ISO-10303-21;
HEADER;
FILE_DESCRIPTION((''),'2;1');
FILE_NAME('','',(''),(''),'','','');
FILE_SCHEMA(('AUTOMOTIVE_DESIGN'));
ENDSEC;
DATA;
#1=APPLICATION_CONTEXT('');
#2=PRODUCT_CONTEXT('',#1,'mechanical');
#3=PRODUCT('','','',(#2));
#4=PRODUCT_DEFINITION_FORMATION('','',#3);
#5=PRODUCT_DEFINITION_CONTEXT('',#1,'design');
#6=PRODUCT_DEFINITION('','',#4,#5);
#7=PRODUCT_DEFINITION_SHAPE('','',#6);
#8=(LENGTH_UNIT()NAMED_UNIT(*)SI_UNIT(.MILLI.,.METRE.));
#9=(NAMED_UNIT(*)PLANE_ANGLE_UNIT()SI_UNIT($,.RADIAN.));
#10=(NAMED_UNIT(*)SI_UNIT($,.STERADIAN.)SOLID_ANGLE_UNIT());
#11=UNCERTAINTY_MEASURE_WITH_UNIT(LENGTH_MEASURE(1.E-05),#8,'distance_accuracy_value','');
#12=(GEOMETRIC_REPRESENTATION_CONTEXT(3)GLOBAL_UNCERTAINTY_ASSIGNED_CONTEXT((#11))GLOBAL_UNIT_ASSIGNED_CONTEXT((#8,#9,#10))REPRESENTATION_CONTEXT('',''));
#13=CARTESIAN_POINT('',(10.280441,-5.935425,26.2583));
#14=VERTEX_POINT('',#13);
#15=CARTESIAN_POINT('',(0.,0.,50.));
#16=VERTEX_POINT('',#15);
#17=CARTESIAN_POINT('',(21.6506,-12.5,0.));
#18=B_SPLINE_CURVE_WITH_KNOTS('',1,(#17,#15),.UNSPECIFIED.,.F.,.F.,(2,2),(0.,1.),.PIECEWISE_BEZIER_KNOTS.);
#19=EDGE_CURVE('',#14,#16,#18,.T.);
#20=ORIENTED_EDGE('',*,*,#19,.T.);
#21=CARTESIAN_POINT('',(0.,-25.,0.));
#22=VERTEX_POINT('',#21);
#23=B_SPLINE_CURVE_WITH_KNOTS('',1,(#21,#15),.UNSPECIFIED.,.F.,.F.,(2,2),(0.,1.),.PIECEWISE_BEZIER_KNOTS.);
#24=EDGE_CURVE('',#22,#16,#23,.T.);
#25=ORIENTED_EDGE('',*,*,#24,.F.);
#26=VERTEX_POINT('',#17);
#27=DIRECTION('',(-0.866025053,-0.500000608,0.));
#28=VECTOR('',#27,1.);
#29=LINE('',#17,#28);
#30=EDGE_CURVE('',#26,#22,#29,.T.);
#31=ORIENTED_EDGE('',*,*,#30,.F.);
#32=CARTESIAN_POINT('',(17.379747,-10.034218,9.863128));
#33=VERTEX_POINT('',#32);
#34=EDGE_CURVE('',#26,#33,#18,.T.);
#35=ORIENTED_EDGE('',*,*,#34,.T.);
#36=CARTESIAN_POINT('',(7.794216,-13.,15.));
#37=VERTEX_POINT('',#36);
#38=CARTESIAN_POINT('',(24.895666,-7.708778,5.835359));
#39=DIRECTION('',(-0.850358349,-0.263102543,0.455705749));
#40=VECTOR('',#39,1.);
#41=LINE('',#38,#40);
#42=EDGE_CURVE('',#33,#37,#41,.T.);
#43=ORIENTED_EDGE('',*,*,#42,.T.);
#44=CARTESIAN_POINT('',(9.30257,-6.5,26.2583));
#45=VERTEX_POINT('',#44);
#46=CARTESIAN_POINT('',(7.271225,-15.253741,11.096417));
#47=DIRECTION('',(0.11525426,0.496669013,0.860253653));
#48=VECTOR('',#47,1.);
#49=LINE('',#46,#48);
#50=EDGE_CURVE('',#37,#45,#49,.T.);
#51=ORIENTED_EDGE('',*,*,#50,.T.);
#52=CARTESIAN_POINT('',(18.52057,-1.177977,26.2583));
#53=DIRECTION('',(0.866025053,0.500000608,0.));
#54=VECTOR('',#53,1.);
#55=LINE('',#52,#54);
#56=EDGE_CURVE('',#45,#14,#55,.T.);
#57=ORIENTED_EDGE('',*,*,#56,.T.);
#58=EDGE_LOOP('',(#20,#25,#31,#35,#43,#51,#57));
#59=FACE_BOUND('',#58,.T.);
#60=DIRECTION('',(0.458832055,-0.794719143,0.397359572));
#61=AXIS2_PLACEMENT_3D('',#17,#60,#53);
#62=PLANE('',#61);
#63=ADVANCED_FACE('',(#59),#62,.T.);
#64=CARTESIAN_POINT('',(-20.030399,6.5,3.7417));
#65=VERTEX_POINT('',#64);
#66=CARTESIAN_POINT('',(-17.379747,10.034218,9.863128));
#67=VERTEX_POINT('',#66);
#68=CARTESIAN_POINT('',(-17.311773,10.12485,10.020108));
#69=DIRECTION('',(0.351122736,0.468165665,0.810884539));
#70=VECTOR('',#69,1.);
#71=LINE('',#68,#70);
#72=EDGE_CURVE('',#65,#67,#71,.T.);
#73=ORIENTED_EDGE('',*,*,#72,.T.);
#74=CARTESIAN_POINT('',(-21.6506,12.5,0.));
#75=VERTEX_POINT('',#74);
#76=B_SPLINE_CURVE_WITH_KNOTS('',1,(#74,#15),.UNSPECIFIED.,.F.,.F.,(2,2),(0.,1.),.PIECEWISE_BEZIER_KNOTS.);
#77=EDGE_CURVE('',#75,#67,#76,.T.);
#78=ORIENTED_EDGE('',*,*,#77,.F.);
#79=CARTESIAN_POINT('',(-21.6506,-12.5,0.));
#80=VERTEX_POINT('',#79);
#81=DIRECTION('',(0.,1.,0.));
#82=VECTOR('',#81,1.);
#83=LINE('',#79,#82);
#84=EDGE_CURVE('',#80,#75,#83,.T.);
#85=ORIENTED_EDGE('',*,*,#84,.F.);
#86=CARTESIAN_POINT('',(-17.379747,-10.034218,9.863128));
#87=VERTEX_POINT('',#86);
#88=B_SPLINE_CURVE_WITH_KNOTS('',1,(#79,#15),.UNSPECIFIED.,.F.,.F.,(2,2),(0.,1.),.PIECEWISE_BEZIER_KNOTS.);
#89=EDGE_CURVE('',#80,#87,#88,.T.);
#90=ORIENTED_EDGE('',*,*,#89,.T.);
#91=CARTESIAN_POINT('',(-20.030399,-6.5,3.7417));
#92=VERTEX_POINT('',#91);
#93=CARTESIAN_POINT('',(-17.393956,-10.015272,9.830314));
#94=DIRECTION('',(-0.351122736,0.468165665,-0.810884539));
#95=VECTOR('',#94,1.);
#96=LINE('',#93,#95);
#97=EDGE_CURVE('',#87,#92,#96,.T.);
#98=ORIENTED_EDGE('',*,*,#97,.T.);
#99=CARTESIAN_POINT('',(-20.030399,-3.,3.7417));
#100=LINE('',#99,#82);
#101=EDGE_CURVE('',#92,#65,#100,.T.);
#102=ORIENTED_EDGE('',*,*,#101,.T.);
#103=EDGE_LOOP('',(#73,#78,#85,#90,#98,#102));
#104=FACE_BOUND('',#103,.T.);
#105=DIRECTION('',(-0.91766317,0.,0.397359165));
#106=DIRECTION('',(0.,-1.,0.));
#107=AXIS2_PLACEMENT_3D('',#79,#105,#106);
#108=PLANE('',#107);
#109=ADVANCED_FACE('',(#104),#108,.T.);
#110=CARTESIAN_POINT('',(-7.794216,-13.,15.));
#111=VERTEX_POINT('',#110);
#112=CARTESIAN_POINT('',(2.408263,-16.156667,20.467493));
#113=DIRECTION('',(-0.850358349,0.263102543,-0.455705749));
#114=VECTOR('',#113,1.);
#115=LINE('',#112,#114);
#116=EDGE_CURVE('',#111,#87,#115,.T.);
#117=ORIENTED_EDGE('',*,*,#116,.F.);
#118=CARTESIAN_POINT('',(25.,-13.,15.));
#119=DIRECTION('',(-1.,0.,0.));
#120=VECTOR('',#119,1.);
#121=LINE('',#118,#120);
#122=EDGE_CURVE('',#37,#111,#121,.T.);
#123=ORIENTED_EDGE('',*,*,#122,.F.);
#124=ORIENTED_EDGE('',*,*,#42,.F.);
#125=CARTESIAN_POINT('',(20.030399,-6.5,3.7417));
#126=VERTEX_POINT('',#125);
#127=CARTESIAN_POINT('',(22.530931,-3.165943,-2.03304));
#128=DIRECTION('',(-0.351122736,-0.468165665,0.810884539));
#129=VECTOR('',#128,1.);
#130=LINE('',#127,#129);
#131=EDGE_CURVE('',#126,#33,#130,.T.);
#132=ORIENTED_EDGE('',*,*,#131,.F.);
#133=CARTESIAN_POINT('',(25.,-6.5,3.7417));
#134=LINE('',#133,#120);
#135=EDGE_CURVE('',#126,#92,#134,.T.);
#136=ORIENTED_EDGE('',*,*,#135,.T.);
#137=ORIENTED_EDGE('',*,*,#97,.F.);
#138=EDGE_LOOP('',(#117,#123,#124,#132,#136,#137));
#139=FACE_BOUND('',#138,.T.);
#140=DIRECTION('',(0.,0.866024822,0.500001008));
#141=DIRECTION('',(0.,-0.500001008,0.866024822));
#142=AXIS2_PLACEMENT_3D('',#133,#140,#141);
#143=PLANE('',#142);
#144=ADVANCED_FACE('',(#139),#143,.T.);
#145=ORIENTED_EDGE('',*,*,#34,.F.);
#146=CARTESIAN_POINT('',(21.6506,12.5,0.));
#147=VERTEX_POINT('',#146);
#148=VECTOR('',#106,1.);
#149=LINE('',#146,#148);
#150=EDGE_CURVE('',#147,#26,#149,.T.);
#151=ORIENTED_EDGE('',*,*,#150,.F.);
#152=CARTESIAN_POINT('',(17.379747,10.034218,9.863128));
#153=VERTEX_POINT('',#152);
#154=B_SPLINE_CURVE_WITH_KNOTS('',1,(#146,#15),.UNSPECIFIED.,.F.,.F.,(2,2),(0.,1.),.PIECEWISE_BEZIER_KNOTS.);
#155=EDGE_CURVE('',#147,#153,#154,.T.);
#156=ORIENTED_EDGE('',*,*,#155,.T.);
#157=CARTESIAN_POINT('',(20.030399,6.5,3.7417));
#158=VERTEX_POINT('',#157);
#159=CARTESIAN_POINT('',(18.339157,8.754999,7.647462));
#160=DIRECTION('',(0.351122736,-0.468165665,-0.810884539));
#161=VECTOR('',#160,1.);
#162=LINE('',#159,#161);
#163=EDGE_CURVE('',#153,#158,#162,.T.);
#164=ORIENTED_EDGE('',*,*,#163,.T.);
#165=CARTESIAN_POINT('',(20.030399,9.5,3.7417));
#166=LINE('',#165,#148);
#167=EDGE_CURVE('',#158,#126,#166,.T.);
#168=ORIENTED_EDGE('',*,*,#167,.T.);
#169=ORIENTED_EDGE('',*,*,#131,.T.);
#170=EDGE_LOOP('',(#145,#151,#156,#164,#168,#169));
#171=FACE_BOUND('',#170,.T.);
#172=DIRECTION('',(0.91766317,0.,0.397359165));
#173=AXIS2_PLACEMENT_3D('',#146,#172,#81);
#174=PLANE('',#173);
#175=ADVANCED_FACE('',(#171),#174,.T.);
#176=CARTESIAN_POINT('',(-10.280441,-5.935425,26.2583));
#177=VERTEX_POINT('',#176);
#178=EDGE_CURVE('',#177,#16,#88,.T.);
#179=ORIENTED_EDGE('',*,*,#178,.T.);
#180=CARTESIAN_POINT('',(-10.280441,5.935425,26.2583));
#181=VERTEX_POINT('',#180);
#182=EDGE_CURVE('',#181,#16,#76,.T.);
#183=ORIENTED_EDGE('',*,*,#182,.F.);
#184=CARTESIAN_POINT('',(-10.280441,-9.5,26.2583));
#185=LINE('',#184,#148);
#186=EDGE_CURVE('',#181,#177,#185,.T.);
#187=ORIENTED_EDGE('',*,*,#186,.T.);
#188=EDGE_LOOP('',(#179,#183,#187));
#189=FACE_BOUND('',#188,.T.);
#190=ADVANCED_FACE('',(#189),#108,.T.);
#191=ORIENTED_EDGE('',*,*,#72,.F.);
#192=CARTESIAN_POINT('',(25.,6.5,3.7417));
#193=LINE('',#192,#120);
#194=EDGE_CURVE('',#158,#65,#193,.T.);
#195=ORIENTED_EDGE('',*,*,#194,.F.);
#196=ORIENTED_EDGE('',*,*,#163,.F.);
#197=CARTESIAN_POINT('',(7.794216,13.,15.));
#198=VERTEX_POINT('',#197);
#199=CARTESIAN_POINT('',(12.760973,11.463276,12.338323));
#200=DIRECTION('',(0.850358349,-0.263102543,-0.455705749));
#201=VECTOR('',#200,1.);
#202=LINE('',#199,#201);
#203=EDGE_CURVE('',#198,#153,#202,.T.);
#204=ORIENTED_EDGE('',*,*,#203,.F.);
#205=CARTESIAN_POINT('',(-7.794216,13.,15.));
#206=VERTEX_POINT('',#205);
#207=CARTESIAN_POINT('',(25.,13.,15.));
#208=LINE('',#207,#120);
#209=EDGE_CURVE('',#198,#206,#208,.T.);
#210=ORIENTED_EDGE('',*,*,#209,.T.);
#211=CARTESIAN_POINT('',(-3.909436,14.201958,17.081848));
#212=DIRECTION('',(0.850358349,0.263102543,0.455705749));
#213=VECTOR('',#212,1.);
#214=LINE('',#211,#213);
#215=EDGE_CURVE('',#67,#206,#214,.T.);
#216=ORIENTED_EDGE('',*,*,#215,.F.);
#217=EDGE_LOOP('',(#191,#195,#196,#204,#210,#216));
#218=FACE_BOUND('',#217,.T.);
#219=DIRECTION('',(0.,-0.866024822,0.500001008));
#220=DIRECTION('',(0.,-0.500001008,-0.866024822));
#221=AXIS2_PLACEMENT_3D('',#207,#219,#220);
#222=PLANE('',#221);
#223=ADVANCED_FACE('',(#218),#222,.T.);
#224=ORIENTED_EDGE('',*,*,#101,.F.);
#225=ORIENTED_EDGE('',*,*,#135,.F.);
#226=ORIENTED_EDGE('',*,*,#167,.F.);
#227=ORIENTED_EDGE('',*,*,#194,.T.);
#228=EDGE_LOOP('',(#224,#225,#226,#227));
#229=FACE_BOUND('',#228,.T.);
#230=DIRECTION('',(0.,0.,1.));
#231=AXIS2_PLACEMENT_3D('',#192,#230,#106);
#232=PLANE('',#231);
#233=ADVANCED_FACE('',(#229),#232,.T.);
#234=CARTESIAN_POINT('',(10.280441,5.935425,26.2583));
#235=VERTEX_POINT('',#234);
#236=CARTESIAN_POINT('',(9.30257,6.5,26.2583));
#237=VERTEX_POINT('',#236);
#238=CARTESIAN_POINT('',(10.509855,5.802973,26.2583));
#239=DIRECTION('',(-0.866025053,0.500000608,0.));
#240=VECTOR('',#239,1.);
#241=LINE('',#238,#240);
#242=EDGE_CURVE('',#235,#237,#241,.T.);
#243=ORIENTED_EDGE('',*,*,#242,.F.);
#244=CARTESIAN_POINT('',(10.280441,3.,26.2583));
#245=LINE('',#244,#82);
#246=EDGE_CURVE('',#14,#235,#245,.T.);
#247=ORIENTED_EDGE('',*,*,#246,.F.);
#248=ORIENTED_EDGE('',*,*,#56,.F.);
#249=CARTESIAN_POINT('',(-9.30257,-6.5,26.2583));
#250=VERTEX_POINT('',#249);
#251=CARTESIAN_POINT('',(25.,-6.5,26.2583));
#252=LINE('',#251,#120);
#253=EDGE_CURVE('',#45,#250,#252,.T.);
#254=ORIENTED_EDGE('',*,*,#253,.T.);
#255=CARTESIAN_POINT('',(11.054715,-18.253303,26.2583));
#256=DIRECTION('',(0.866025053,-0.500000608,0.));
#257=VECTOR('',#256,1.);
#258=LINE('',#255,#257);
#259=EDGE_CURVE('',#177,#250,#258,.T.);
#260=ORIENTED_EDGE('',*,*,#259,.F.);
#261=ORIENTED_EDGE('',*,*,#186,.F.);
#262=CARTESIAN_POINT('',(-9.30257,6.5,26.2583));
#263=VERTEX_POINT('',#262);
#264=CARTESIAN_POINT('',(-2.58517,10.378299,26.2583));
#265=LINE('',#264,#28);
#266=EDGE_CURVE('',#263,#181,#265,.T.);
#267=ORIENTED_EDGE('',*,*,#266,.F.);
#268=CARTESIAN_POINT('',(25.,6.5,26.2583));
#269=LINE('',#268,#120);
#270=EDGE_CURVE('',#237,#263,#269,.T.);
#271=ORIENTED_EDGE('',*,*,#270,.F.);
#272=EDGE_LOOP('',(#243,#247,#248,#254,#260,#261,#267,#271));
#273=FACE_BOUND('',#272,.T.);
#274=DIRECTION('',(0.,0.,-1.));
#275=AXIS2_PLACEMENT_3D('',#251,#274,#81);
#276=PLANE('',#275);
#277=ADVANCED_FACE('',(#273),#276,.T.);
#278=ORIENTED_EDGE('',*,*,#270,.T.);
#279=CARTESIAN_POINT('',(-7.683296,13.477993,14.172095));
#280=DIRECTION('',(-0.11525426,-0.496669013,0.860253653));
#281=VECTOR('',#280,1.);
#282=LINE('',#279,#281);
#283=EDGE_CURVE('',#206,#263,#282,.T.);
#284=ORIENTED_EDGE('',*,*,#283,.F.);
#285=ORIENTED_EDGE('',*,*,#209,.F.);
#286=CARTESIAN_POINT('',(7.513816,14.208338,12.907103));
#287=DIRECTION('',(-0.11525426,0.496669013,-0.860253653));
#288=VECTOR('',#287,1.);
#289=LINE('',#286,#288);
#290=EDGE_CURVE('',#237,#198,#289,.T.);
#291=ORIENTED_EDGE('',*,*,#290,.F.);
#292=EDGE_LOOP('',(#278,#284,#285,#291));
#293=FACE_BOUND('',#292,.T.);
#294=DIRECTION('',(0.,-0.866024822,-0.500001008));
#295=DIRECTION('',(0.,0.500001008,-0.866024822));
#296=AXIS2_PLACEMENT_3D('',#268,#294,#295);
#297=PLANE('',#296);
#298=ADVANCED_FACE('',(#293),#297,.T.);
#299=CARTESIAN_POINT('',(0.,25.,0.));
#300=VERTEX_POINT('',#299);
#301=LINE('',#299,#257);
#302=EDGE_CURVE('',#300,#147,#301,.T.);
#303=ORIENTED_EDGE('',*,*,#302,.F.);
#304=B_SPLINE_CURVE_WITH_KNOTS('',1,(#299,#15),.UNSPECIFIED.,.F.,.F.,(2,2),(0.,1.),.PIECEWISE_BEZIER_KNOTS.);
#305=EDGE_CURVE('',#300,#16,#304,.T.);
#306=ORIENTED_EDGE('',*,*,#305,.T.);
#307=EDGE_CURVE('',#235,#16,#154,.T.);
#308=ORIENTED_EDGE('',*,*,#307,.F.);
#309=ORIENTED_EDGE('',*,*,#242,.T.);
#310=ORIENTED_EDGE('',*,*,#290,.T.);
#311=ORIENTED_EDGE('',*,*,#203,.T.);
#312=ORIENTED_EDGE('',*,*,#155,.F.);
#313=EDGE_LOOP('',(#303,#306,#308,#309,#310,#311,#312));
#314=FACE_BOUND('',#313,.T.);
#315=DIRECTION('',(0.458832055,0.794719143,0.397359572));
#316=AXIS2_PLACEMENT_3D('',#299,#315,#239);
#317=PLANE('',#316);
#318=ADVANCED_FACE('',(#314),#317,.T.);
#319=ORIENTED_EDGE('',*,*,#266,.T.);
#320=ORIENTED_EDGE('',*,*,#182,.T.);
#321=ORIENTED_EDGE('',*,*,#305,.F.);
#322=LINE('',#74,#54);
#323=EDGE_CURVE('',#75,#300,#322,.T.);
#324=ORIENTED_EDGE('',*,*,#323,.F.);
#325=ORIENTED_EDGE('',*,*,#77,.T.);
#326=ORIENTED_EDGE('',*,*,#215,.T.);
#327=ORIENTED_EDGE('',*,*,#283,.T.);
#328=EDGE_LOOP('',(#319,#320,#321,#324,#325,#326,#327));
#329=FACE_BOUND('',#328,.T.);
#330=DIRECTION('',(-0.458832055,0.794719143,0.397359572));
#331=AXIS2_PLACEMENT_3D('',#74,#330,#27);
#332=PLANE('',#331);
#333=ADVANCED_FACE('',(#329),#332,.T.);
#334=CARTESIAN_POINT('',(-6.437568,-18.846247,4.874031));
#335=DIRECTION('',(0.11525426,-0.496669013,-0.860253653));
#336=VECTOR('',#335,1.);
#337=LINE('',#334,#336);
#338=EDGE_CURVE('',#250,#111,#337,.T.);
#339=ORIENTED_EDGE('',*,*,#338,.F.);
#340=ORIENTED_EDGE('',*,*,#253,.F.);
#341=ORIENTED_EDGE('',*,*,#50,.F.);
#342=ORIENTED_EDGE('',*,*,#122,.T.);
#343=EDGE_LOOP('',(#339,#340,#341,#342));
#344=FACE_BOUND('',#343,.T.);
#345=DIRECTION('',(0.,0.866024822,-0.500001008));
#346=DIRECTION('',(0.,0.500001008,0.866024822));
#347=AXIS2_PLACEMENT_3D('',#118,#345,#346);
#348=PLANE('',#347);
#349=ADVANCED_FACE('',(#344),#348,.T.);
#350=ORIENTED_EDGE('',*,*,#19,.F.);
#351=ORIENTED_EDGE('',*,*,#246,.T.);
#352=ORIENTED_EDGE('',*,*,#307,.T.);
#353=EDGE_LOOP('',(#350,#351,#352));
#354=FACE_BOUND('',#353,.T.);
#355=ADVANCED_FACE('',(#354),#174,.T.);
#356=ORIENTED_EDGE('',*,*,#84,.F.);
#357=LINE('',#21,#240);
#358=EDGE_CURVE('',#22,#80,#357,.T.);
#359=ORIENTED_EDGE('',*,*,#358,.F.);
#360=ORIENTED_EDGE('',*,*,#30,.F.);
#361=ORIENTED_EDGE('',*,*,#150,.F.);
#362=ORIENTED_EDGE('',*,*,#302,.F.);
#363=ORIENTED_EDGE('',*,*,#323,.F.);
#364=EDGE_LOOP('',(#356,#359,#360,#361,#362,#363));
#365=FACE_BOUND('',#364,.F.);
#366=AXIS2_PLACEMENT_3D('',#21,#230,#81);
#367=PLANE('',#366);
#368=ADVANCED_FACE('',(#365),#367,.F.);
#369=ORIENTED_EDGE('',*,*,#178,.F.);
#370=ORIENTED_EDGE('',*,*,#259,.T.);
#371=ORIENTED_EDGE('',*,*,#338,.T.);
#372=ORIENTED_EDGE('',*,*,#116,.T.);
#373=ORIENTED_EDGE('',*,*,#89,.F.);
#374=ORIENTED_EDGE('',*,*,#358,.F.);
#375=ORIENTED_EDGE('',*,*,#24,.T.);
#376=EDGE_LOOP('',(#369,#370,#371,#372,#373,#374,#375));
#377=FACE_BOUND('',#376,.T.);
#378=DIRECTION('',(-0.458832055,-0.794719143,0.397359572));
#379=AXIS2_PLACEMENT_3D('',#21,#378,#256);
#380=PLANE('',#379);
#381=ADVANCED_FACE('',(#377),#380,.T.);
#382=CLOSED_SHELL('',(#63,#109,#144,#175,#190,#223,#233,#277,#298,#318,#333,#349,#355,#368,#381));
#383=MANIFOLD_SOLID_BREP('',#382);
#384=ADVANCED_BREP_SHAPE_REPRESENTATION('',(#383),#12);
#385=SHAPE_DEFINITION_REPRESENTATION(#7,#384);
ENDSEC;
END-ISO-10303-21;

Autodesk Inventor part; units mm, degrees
ref_plane "XZ Plane" through (0, 0, 0) normal (0, 1, 0) x (-1, 0, 0)
sketch "Эскиз1" plane through (0, 0, 0) normal (0, 0, 1) x (1, 0, 0)
  line L0 (0, -25) -> (-21.6506, -12.5)
  line L1 (-21.6506, -12.5) -> (-21.6506, 12.5)
  line L2 (-21.6506, 12.5) -> (0, 25)
  line L3 (0, 25) -> (21.6506, 12.5)
  line L4 (21.6506, 12.5) -> (21.6506, -12.5)
  line L5 (21.6506, -12.5) -> (0, -25)
  point P0 (0, 0)
  point P1 (0, 0)
ref_plane "РабПлоскость1" through (0, 0, 50) normal (0, 0, 1) x (1, 0, 0)
sketch "Эскиз2" plane through (0, 0, 50) normal (0, 0, 1) x (1, 0, 0)
  point P0 (0, 0)
  point P1 (0, 0)
loft "Лофт1" add profiles "Эскиз1" section 2 point at (0, 0, 50)
ref_plane "РабПлоскость2" through (25, 0, 0) normal (1, 0, 0) x (0, 1, 0)
sketch "Эскиз3" plane through (25, 0, 0) normal (1, 0, 0) x (0, 1, 0)
  line L0 (25, 0) -> (0, 50) projected
  line L1 (13, 15) -> (6.5, 3.7417)
  line L2 (6.5, 3.7417) -> (-6.5, 3.7417)
  line L3 (-6.5, 3.7417) -> (-13, 15)
  line L4 (-13, 15) -> (-6.5, 26.2583)
  line L5 (-6.5, 26.2583) -> (6.5, 26.2583)
  line L6 (6.5, 26.2583) -> (13, 15)
  point P0 (0, 0)
  point P1 (0, 15)
extrude "Выдавливание1" cut sketch "Эскиз3" against normal blind 50
properties part number "пирамида"
